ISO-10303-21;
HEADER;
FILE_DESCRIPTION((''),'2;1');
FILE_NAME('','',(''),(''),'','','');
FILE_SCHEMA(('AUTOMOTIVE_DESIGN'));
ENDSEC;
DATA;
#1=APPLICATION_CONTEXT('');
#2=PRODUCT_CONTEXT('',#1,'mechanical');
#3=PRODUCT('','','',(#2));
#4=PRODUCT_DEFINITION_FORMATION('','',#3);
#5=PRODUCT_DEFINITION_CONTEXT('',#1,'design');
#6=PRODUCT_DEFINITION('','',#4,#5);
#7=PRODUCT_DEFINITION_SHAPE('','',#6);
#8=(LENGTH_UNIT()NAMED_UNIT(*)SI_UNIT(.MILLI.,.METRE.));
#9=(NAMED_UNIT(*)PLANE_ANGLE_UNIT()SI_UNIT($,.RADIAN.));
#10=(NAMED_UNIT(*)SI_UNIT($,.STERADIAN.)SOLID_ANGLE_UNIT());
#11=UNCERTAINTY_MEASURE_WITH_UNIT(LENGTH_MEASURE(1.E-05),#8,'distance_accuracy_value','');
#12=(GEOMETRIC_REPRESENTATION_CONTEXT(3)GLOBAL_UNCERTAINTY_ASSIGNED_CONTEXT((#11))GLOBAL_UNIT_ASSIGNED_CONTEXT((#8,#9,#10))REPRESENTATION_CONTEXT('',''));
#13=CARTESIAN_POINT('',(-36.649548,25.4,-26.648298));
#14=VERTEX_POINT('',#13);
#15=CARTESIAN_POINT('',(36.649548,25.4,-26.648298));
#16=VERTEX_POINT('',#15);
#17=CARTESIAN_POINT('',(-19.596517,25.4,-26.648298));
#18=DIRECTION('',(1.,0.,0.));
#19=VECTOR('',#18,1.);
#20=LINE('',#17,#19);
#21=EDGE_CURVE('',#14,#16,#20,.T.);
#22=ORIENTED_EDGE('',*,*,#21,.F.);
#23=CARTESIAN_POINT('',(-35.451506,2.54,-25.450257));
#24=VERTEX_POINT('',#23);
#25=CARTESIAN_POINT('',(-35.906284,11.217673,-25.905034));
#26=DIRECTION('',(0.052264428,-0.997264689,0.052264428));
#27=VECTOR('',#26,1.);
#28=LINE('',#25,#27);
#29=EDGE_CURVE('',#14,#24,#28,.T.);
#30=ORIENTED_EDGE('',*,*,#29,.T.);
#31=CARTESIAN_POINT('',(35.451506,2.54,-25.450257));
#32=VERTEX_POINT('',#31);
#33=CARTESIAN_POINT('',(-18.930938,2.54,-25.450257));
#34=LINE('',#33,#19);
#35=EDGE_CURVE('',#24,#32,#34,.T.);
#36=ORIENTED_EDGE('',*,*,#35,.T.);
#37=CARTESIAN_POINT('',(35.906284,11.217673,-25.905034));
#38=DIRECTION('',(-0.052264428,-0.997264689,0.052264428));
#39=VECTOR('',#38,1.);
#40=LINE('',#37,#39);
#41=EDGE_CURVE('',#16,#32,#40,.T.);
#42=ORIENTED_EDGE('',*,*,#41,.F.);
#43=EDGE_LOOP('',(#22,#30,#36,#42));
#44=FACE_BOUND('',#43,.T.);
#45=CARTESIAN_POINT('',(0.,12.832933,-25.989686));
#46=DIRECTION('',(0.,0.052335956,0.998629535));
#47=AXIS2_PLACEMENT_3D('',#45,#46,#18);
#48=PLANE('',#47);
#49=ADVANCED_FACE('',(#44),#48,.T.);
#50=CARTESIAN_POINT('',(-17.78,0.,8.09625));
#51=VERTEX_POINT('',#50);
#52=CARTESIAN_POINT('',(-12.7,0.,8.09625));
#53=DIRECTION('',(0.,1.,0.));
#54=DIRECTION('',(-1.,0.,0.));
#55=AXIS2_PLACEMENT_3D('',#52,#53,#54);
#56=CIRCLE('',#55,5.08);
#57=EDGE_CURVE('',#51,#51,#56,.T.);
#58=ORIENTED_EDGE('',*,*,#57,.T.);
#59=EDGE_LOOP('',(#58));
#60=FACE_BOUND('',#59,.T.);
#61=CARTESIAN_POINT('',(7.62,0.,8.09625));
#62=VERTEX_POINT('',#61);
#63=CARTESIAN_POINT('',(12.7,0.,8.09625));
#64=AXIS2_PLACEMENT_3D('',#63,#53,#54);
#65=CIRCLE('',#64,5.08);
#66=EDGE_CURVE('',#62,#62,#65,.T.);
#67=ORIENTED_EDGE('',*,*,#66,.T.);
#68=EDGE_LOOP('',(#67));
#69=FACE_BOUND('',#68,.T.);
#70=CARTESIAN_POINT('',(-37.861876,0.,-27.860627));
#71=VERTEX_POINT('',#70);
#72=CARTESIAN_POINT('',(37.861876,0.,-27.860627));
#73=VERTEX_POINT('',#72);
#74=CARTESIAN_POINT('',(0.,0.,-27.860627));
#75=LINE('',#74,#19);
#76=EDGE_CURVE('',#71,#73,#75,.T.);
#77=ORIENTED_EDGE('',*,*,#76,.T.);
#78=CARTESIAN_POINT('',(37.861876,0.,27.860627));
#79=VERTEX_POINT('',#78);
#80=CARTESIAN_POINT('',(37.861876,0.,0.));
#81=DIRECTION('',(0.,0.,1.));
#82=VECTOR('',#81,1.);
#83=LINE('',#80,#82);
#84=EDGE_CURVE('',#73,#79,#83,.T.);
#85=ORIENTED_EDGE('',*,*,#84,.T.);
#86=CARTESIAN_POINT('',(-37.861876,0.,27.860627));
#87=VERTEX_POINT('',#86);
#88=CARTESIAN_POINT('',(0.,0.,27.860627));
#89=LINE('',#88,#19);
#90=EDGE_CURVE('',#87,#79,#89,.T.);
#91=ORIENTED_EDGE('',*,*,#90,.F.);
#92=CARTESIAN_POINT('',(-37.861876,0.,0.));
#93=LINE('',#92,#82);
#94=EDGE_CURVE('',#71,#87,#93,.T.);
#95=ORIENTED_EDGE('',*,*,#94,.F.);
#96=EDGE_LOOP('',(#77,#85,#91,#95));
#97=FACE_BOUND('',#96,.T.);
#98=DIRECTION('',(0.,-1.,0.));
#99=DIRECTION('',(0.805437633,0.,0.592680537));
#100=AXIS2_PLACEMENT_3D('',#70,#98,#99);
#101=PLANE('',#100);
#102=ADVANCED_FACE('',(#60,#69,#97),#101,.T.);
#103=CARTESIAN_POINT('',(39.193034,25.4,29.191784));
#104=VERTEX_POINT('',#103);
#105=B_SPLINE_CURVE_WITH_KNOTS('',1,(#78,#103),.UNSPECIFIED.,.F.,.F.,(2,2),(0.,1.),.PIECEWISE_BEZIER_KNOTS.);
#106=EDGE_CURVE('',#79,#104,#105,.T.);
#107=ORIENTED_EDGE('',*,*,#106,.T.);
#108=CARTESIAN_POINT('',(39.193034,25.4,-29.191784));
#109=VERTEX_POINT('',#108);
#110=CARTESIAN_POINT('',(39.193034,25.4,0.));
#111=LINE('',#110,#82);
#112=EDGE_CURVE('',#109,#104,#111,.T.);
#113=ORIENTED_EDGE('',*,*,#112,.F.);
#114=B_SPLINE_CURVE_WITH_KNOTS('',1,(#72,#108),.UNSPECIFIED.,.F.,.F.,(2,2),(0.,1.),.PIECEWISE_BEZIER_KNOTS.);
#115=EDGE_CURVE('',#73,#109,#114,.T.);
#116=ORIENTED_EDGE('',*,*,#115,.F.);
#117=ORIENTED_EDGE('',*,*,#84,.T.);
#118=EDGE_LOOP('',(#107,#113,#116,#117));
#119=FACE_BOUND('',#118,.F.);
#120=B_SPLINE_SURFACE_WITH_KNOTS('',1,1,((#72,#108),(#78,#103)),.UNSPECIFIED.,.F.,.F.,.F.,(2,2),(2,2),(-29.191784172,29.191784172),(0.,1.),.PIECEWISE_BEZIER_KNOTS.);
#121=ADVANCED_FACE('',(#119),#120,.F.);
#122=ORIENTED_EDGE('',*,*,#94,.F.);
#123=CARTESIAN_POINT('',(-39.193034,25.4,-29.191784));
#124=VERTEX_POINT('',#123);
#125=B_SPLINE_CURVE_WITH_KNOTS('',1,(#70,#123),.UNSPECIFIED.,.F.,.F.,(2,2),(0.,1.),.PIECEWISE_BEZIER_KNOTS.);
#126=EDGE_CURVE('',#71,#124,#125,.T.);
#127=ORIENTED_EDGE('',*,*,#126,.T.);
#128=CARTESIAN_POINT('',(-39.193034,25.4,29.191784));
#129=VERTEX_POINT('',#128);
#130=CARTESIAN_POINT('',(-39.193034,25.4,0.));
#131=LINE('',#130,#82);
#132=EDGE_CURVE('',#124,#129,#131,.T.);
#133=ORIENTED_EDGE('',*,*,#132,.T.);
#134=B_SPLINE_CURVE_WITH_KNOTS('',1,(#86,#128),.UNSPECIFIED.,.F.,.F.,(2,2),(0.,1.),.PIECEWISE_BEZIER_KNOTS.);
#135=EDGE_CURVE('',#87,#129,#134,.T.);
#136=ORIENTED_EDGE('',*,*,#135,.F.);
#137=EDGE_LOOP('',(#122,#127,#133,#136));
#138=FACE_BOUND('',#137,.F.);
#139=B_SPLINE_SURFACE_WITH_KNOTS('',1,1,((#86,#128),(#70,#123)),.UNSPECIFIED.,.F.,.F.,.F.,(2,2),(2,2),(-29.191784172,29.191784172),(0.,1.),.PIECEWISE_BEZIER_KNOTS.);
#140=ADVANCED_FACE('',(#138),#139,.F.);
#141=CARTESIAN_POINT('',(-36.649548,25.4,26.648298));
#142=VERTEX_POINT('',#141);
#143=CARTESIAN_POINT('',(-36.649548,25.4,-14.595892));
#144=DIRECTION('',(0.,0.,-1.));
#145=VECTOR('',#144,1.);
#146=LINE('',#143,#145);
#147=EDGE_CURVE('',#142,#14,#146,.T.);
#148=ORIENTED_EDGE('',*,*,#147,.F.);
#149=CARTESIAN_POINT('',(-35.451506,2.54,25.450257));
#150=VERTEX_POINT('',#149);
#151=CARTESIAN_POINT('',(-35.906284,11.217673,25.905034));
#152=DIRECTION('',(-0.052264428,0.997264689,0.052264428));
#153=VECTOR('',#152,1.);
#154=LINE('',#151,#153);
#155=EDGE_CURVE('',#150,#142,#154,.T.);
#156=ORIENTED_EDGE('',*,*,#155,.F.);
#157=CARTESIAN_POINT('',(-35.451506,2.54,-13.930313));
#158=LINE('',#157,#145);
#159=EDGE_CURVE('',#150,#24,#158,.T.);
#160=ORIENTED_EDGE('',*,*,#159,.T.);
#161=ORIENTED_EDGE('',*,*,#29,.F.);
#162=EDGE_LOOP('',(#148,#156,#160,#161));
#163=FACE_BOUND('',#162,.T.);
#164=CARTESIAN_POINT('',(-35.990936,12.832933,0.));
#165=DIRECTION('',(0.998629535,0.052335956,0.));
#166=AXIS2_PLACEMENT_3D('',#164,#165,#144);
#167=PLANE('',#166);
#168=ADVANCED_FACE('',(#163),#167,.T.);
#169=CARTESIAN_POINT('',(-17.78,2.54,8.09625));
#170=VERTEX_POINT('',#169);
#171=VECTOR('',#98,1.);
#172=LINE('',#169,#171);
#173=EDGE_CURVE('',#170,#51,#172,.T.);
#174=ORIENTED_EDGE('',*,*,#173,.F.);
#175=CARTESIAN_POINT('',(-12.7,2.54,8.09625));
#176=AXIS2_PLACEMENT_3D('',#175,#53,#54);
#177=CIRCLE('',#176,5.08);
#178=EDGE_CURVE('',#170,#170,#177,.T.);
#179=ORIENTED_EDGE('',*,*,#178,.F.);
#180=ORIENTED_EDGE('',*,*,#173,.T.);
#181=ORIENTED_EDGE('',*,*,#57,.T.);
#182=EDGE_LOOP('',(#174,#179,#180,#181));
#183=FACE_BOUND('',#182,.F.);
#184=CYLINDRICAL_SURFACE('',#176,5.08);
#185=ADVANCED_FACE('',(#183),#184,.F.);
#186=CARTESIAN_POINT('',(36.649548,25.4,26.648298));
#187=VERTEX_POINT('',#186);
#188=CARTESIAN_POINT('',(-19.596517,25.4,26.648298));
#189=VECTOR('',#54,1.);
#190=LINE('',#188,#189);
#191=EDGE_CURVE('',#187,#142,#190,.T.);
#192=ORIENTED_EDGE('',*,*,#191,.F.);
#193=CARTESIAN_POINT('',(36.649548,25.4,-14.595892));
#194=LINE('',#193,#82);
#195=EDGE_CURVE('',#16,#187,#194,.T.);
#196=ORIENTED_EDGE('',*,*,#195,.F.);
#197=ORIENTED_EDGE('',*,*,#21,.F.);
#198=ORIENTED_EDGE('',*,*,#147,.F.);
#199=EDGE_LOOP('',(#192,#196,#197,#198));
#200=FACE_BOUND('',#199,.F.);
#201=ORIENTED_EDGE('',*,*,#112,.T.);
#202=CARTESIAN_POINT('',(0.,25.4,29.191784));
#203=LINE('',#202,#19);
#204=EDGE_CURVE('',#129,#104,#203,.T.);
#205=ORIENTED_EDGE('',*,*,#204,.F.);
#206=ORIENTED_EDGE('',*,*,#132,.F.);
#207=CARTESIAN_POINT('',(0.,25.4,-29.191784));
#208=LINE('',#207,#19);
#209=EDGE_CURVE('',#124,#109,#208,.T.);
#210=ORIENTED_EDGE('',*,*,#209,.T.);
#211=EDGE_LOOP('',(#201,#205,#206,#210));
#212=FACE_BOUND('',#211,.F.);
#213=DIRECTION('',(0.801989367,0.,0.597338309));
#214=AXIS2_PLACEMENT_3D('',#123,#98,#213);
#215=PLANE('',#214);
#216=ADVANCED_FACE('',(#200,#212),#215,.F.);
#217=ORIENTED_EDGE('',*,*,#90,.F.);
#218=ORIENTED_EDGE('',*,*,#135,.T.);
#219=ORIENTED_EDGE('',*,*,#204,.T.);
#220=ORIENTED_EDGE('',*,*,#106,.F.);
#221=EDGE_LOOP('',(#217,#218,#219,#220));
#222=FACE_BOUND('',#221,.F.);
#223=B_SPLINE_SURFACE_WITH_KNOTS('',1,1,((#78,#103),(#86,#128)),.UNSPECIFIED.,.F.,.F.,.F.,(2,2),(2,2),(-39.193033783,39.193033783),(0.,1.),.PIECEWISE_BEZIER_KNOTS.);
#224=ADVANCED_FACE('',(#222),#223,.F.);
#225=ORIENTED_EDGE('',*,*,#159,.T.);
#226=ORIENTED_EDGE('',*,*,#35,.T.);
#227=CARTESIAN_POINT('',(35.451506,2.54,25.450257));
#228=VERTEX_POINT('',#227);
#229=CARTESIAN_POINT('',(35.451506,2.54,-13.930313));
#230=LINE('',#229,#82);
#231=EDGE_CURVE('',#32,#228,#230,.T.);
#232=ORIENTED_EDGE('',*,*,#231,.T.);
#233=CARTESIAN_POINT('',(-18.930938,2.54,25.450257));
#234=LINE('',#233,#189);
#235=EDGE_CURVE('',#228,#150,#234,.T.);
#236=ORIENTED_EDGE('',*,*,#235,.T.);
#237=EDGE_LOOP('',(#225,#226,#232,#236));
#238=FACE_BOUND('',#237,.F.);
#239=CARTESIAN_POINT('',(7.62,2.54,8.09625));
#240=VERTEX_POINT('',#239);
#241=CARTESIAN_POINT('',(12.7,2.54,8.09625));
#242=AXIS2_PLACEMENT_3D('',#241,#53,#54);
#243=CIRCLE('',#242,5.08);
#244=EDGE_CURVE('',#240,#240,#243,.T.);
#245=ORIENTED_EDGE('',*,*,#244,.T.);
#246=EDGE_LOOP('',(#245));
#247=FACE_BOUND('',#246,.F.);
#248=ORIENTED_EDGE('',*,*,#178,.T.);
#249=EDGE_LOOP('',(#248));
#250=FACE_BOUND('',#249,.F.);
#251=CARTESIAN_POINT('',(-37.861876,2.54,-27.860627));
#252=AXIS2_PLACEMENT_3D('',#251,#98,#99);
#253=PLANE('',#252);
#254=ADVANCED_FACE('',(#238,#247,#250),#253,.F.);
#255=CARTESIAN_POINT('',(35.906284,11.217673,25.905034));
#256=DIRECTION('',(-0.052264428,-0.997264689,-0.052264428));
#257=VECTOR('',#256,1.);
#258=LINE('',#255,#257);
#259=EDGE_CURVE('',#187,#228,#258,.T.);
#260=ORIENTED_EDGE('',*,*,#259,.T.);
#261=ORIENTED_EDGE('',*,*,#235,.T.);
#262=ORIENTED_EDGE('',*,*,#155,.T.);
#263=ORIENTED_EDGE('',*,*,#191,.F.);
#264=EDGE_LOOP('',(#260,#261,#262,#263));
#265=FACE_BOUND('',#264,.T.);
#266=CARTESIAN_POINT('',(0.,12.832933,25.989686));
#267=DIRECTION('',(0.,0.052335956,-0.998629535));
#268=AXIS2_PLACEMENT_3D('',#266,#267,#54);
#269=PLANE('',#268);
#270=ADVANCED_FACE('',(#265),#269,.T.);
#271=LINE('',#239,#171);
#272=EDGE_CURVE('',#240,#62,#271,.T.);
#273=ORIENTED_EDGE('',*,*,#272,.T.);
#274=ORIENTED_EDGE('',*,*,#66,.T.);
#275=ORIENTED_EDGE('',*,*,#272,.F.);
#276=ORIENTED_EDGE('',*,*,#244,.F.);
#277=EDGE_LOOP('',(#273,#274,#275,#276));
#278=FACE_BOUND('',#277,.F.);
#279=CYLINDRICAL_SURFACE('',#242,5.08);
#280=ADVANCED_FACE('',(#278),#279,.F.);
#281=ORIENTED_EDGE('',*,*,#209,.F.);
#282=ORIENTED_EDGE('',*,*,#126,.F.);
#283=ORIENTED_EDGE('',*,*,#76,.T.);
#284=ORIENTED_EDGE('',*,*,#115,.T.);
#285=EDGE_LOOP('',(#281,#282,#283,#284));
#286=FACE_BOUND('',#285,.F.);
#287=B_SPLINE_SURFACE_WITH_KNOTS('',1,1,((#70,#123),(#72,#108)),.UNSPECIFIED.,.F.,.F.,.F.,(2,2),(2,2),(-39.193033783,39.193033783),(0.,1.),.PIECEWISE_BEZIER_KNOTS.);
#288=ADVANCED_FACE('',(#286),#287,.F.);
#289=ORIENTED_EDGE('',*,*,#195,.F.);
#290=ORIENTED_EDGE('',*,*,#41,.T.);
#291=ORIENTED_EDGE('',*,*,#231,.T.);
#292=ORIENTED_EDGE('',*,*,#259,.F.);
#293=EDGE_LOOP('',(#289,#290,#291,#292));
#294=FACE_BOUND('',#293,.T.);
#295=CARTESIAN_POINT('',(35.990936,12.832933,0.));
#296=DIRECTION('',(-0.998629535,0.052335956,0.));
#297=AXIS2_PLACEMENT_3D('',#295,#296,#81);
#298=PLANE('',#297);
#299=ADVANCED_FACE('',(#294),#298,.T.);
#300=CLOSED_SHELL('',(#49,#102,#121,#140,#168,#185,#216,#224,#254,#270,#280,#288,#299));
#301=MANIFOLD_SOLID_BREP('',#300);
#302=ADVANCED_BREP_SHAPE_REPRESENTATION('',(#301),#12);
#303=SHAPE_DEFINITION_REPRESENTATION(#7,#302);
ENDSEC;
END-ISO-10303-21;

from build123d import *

# Parameters (mm, degrees)
F0_W     = 75.7237523794
F0_H     = 55.7212531567
F1_DEPTH = 25.4
F1_TAPER = -3
F2_T     = -2.54
F3_R     = 5.08
F4_DEPTH = 2.5410001


# Not quite as in the source:
# - a feature of the source that left no trace in its solid (it failed there, or was rolled back) is left out


with BuildPart() as f1:
    # F0 (on Front) → F1 (new body)
    with BuildSketch(Plane.XZ):
        Rectangle(F0_W, F0_H)
    extrude(amount=-F1_DEPTH, taper=F1_TAPER)

    # F2
    f2_openings = [f1.faces().sort_by_distance(p)[0] for p in [
        (0, 25.4, 0),
    ]]
    offset(amount=F2_T, openings=f2_openings)

    # F3 (on face) → F4 (cut, through all)
    with BuildSketch(Plane(origin=(0, 2.54, 0), x_dir=(-1, 0, 0), z_dir=(0, 1, 0))):
        with Locations((12.7, 8.0962497741)):
            Circle(F3_R)
        with Locations((-12.7, 8.0962497741)):
            Circle(F3_R)
    extrude(amount=-F4_DEPTH, mode=Mode.SUBTRACT)


solid = f1.part
